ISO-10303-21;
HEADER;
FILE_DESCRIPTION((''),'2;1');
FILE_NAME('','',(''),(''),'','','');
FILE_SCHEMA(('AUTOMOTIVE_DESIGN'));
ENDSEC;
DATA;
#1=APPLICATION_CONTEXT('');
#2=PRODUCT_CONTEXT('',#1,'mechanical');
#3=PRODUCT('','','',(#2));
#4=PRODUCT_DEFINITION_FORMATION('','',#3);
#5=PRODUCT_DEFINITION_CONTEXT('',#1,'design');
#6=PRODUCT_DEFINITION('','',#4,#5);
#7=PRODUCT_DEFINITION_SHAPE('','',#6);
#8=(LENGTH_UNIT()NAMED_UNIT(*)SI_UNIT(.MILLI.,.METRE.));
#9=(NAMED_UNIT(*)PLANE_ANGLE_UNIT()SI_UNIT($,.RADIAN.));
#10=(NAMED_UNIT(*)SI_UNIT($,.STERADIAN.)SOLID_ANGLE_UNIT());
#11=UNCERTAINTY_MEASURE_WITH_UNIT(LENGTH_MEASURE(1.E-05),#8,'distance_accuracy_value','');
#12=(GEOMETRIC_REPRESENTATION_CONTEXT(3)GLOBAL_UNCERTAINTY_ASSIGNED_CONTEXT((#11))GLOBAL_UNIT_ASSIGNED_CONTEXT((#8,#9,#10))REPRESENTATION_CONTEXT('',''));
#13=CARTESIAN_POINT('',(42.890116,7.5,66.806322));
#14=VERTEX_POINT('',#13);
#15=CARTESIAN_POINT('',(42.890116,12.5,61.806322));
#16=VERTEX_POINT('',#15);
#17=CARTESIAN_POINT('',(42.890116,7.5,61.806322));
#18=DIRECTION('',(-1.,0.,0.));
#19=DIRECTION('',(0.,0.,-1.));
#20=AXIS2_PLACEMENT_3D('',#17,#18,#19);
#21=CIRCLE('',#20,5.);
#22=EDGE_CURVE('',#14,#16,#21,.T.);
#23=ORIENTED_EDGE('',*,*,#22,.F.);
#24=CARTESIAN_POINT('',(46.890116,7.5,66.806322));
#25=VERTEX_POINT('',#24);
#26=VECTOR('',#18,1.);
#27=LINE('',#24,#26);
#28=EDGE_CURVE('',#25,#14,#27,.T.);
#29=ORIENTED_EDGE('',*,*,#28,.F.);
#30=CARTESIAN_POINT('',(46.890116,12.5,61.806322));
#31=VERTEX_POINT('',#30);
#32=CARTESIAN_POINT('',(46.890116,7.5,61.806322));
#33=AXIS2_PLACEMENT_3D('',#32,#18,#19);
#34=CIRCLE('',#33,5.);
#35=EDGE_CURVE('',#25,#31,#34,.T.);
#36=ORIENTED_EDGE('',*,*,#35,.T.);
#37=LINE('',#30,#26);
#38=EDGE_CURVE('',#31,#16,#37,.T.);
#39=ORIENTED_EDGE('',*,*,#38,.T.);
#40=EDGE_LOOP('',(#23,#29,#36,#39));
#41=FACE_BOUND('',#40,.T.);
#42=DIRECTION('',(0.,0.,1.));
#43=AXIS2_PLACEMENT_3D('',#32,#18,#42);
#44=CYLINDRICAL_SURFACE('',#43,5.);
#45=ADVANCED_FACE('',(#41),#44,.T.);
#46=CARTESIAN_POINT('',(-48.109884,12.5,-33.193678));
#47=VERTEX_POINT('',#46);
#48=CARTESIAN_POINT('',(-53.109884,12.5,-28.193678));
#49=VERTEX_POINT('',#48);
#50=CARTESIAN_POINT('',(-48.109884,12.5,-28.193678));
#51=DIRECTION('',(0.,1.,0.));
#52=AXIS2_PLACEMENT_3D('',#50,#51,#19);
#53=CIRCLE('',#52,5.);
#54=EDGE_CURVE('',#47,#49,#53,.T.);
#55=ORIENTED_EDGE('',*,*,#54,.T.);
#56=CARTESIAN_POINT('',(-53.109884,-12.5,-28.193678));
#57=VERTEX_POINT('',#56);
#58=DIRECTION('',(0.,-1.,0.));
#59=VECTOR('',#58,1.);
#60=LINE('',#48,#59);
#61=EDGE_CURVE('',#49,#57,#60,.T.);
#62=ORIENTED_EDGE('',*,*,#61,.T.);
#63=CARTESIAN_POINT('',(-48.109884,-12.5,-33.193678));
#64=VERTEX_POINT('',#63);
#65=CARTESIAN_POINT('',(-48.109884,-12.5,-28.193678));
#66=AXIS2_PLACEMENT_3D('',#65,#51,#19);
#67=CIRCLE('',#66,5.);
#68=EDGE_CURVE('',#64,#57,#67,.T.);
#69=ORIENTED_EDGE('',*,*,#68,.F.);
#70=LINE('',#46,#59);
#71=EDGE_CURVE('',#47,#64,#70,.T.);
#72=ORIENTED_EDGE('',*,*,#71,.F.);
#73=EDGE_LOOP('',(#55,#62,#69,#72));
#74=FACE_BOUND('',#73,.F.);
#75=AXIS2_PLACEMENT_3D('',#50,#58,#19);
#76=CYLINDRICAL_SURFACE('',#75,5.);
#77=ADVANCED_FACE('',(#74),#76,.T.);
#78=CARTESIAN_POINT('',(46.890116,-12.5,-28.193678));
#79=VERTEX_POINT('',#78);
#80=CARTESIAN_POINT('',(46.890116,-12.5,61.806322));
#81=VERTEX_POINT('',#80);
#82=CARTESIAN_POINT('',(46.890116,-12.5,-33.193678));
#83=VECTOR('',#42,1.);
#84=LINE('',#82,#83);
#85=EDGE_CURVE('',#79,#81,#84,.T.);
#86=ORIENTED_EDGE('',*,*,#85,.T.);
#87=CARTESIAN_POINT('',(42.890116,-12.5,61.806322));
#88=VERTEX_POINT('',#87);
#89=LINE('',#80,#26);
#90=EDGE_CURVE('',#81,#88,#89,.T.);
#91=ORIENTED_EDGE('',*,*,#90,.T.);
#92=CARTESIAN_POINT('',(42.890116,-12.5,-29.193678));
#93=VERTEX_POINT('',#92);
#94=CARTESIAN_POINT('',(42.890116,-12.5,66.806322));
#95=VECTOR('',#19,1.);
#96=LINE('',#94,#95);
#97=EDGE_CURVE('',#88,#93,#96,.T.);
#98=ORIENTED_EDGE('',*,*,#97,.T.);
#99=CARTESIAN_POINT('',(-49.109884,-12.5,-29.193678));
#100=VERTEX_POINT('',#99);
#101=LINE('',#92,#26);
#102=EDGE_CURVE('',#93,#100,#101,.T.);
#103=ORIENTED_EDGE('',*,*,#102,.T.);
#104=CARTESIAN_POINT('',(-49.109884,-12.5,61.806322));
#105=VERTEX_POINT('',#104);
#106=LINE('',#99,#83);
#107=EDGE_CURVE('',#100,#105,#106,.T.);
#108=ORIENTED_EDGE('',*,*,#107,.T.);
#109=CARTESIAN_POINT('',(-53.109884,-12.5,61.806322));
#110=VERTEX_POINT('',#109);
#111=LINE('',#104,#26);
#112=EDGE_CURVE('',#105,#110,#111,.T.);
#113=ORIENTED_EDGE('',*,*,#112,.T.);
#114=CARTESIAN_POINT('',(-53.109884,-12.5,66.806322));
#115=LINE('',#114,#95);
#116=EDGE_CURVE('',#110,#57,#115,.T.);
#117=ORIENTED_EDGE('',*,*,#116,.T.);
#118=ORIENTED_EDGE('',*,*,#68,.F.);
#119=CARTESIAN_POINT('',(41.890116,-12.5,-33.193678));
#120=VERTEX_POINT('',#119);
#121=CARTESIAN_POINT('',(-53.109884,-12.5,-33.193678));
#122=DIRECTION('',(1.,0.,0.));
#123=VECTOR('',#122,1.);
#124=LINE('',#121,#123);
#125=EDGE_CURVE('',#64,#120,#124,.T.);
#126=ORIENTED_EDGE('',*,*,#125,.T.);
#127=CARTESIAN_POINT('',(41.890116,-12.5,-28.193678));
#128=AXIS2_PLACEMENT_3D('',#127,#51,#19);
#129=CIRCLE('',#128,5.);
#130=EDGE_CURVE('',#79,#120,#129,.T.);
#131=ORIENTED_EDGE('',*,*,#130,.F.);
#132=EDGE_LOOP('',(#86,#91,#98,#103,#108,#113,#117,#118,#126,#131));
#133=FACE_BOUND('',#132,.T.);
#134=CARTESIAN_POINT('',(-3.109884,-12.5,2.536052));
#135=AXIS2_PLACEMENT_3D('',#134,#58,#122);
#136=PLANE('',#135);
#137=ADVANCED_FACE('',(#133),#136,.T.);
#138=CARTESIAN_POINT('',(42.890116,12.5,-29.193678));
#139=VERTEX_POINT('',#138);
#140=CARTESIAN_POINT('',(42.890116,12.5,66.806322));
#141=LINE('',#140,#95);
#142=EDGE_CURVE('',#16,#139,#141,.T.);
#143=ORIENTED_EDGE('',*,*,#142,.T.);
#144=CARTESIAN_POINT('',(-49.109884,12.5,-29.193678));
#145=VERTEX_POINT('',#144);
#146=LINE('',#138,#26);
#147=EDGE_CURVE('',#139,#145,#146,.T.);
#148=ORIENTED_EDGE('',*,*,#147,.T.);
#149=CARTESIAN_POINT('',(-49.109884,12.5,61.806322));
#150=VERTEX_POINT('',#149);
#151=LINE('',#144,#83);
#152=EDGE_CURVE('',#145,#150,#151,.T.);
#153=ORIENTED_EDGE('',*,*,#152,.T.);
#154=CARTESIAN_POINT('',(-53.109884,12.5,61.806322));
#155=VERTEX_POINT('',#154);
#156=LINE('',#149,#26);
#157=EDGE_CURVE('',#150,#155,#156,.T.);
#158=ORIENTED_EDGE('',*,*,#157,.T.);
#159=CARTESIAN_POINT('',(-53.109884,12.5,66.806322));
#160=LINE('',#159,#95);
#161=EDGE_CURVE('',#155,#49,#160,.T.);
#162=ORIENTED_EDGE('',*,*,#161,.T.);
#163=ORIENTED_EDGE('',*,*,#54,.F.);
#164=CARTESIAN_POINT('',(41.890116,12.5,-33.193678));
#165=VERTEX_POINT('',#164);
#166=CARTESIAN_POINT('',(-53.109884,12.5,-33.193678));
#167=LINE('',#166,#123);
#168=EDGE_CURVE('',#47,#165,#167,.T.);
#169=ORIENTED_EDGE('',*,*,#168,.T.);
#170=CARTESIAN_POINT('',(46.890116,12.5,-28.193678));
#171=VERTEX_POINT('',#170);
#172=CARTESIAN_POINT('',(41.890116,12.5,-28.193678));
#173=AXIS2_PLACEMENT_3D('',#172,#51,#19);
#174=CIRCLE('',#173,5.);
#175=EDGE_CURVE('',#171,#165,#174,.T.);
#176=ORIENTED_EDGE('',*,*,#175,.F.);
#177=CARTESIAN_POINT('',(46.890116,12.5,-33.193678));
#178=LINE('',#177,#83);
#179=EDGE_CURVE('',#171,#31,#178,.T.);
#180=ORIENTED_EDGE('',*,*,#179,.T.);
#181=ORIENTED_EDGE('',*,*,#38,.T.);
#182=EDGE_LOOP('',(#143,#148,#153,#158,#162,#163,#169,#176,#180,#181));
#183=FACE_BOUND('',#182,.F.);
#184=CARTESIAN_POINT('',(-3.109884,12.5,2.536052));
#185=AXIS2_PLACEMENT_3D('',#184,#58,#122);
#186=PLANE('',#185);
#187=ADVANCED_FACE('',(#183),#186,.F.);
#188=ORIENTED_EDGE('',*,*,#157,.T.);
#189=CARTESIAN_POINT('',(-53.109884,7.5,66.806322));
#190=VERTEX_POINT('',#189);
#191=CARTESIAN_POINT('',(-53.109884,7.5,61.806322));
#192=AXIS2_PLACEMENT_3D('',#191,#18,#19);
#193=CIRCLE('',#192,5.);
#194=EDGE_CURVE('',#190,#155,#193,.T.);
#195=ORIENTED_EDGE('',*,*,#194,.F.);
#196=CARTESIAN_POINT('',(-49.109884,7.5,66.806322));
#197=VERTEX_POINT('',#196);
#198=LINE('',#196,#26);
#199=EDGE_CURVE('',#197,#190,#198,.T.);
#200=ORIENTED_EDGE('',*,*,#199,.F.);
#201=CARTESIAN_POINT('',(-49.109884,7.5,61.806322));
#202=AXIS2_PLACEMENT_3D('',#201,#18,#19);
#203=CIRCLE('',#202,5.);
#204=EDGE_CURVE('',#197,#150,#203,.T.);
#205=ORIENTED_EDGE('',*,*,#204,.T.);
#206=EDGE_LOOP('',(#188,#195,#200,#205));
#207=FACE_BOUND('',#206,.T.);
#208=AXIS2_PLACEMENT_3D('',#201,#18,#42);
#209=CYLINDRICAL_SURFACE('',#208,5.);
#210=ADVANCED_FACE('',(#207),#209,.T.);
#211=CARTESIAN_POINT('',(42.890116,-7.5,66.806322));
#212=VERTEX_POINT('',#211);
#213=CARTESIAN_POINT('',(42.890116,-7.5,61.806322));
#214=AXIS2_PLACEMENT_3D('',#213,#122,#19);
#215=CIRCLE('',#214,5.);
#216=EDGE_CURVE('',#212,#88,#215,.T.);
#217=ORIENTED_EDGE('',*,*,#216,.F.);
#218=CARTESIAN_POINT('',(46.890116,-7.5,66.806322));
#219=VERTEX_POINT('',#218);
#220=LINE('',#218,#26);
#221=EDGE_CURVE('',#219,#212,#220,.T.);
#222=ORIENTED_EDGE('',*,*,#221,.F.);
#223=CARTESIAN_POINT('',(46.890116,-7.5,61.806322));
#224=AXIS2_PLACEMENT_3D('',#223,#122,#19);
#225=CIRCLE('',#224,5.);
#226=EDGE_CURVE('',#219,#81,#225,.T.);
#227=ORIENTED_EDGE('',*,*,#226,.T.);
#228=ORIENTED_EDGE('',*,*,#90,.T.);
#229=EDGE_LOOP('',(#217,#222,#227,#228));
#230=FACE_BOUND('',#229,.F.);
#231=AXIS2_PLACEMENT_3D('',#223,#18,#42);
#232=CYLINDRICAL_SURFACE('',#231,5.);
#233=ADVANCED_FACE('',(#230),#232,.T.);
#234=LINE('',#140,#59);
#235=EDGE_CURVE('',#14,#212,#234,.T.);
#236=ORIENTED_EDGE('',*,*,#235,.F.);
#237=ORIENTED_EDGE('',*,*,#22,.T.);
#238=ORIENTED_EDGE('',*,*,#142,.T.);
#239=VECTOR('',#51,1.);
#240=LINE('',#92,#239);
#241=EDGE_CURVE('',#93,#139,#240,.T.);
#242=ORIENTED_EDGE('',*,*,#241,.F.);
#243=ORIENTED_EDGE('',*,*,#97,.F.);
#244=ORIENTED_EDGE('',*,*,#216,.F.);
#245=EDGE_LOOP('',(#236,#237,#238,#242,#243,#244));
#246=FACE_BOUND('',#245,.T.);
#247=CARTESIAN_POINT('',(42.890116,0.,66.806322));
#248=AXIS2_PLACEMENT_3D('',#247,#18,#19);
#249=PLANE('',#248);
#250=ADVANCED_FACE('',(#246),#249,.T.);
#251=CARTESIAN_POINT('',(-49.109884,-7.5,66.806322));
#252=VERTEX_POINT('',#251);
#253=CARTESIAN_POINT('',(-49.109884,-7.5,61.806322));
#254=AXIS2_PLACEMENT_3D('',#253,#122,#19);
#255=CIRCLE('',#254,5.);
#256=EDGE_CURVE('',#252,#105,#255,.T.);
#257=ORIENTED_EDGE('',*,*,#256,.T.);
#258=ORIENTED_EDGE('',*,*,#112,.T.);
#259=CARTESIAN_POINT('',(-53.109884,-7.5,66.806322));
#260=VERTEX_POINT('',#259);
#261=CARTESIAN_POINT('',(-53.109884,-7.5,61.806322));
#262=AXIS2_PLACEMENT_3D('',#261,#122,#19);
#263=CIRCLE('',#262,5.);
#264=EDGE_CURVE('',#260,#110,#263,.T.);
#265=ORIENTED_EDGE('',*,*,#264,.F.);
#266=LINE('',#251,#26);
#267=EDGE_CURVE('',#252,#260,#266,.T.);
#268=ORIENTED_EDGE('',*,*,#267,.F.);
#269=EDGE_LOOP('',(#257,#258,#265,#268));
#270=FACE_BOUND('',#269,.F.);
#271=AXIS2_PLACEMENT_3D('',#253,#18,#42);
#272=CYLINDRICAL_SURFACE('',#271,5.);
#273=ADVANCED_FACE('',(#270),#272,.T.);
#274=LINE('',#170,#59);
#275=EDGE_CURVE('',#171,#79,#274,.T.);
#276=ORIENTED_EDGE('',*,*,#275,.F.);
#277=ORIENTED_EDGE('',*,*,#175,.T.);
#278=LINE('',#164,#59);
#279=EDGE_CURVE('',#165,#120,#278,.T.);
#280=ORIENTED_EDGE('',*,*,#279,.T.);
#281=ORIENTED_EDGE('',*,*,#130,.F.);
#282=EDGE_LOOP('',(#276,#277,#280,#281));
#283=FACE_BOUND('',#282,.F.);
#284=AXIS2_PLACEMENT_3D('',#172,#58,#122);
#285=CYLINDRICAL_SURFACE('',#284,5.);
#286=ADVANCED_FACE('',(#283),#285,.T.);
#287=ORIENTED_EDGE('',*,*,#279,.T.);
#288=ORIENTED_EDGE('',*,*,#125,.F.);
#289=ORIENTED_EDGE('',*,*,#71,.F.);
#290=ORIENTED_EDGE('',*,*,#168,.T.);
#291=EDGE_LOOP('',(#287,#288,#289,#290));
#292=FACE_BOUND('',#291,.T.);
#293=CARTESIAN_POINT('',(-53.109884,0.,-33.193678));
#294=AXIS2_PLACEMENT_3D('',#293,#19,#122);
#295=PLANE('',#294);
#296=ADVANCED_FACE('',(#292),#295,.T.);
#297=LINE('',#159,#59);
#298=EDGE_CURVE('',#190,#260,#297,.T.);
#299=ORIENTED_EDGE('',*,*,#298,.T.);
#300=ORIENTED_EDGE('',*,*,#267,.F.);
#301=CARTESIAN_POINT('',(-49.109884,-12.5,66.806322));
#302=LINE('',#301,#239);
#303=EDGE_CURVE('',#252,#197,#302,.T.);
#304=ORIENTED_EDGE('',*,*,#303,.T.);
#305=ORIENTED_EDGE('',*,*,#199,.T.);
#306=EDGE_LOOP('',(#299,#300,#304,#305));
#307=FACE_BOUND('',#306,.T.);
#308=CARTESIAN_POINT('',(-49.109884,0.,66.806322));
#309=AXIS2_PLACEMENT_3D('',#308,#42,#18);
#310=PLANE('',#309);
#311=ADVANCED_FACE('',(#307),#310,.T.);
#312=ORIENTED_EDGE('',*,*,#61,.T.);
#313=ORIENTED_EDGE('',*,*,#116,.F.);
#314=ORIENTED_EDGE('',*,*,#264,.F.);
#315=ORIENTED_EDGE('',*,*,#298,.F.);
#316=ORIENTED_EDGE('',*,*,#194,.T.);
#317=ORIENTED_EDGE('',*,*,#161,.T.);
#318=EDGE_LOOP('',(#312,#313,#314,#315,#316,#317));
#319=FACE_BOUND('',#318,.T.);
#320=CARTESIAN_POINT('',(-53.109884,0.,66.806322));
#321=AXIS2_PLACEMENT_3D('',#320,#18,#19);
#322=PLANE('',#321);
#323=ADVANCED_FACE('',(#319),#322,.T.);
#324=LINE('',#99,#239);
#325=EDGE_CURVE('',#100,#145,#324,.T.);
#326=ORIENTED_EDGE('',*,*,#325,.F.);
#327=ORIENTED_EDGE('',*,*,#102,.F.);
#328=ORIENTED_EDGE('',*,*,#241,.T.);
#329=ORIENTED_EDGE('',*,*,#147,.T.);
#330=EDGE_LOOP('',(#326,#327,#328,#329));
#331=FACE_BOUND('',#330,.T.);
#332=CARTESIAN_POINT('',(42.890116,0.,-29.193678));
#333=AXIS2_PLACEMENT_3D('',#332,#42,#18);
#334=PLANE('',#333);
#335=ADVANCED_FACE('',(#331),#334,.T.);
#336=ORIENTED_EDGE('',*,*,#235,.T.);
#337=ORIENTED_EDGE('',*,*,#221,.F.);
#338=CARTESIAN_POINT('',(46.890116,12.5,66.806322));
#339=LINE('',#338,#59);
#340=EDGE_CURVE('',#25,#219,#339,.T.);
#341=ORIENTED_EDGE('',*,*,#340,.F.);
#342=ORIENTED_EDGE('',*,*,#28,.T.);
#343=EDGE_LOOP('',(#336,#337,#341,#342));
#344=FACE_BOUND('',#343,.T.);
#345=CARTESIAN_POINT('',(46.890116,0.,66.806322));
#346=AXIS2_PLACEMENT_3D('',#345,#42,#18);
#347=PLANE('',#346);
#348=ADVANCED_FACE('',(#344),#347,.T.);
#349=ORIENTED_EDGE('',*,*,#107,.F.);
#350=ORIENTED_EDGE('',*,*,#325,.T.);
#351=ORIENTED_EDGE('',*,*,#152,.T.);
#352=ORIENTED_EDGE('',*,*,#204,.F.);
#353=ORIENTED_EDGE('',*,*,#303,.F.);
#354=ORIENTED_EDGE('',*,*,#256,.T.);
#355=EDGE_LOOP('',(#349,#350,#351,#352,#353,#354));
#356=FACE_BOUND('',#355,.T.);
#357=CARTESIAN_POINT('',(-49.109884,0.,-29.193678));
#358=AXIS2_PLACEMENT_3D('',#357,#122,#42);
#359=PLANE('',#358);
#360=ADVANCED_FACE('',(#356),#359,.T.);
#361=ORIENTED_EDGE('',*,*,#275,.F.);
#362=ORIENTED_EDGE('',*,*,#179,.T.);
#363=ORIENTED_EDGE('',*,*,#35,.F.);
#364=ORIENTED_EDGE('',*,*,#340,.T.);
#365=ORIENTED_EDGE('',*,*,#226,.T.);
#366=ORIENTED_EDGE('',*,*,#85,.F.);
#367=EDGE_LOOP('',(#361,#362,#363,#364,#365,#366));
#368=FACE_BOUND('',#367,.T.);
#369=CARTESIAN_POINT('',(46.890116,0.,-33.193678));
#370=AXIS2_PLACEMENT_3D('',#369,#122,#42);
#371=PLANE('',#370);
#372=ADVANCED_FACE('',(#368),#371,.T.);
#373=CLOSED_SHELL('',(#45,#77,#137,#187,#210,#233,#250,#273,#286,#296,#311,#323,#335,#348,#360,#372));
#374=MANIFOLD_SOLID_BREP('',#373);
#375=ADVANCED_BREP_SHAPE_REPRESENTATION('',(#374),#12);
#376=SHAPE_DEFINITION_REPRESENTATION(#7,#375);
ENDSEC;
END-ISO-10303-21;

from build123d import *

# Parameters (mm, degrees)
F1_DEPTH = 12.5
F2_R     = 5


# Not quite as in the source:
# - a feature names something its author has since deleted; it is built from what else it names


with BuildPart() as f1:
    # F0 (on Front) → F1 (new body, symmetric)
    with BuildSketch(Plane.XZ):
        Polygon((-49.1098842621, 66.8063223362), (-53.1098842621, 66.8063223362), (-53.1098842621, -33.1936776638), (46.8901157379, -33.1936776638), (46.8901157379, 66.8063223362), (42.8901157379, 66.8063223362), (42.8901157379, -29.1936776638), (-49.1098842621, -29.1936776638), align=None)
    extrude(amount=F1_DEPTH, both=True)

    # F2
    f2_edges = [f1.edges().sort_by_distance(p)[0] for p in [
        (-51.109884, -12.5, 66.806322),
        (-51.109884, 12.5, 66.806322),
        (44.890116, -12.5, 66.806322),
        (44.890116, 12.5, 66.806322),
        (46.890116, 0, -33.193678),
        (-53.109884, 0, -33.193678),
    ]]
    fillet(f2_edges, radius=F2_R)


solid = f1.part
